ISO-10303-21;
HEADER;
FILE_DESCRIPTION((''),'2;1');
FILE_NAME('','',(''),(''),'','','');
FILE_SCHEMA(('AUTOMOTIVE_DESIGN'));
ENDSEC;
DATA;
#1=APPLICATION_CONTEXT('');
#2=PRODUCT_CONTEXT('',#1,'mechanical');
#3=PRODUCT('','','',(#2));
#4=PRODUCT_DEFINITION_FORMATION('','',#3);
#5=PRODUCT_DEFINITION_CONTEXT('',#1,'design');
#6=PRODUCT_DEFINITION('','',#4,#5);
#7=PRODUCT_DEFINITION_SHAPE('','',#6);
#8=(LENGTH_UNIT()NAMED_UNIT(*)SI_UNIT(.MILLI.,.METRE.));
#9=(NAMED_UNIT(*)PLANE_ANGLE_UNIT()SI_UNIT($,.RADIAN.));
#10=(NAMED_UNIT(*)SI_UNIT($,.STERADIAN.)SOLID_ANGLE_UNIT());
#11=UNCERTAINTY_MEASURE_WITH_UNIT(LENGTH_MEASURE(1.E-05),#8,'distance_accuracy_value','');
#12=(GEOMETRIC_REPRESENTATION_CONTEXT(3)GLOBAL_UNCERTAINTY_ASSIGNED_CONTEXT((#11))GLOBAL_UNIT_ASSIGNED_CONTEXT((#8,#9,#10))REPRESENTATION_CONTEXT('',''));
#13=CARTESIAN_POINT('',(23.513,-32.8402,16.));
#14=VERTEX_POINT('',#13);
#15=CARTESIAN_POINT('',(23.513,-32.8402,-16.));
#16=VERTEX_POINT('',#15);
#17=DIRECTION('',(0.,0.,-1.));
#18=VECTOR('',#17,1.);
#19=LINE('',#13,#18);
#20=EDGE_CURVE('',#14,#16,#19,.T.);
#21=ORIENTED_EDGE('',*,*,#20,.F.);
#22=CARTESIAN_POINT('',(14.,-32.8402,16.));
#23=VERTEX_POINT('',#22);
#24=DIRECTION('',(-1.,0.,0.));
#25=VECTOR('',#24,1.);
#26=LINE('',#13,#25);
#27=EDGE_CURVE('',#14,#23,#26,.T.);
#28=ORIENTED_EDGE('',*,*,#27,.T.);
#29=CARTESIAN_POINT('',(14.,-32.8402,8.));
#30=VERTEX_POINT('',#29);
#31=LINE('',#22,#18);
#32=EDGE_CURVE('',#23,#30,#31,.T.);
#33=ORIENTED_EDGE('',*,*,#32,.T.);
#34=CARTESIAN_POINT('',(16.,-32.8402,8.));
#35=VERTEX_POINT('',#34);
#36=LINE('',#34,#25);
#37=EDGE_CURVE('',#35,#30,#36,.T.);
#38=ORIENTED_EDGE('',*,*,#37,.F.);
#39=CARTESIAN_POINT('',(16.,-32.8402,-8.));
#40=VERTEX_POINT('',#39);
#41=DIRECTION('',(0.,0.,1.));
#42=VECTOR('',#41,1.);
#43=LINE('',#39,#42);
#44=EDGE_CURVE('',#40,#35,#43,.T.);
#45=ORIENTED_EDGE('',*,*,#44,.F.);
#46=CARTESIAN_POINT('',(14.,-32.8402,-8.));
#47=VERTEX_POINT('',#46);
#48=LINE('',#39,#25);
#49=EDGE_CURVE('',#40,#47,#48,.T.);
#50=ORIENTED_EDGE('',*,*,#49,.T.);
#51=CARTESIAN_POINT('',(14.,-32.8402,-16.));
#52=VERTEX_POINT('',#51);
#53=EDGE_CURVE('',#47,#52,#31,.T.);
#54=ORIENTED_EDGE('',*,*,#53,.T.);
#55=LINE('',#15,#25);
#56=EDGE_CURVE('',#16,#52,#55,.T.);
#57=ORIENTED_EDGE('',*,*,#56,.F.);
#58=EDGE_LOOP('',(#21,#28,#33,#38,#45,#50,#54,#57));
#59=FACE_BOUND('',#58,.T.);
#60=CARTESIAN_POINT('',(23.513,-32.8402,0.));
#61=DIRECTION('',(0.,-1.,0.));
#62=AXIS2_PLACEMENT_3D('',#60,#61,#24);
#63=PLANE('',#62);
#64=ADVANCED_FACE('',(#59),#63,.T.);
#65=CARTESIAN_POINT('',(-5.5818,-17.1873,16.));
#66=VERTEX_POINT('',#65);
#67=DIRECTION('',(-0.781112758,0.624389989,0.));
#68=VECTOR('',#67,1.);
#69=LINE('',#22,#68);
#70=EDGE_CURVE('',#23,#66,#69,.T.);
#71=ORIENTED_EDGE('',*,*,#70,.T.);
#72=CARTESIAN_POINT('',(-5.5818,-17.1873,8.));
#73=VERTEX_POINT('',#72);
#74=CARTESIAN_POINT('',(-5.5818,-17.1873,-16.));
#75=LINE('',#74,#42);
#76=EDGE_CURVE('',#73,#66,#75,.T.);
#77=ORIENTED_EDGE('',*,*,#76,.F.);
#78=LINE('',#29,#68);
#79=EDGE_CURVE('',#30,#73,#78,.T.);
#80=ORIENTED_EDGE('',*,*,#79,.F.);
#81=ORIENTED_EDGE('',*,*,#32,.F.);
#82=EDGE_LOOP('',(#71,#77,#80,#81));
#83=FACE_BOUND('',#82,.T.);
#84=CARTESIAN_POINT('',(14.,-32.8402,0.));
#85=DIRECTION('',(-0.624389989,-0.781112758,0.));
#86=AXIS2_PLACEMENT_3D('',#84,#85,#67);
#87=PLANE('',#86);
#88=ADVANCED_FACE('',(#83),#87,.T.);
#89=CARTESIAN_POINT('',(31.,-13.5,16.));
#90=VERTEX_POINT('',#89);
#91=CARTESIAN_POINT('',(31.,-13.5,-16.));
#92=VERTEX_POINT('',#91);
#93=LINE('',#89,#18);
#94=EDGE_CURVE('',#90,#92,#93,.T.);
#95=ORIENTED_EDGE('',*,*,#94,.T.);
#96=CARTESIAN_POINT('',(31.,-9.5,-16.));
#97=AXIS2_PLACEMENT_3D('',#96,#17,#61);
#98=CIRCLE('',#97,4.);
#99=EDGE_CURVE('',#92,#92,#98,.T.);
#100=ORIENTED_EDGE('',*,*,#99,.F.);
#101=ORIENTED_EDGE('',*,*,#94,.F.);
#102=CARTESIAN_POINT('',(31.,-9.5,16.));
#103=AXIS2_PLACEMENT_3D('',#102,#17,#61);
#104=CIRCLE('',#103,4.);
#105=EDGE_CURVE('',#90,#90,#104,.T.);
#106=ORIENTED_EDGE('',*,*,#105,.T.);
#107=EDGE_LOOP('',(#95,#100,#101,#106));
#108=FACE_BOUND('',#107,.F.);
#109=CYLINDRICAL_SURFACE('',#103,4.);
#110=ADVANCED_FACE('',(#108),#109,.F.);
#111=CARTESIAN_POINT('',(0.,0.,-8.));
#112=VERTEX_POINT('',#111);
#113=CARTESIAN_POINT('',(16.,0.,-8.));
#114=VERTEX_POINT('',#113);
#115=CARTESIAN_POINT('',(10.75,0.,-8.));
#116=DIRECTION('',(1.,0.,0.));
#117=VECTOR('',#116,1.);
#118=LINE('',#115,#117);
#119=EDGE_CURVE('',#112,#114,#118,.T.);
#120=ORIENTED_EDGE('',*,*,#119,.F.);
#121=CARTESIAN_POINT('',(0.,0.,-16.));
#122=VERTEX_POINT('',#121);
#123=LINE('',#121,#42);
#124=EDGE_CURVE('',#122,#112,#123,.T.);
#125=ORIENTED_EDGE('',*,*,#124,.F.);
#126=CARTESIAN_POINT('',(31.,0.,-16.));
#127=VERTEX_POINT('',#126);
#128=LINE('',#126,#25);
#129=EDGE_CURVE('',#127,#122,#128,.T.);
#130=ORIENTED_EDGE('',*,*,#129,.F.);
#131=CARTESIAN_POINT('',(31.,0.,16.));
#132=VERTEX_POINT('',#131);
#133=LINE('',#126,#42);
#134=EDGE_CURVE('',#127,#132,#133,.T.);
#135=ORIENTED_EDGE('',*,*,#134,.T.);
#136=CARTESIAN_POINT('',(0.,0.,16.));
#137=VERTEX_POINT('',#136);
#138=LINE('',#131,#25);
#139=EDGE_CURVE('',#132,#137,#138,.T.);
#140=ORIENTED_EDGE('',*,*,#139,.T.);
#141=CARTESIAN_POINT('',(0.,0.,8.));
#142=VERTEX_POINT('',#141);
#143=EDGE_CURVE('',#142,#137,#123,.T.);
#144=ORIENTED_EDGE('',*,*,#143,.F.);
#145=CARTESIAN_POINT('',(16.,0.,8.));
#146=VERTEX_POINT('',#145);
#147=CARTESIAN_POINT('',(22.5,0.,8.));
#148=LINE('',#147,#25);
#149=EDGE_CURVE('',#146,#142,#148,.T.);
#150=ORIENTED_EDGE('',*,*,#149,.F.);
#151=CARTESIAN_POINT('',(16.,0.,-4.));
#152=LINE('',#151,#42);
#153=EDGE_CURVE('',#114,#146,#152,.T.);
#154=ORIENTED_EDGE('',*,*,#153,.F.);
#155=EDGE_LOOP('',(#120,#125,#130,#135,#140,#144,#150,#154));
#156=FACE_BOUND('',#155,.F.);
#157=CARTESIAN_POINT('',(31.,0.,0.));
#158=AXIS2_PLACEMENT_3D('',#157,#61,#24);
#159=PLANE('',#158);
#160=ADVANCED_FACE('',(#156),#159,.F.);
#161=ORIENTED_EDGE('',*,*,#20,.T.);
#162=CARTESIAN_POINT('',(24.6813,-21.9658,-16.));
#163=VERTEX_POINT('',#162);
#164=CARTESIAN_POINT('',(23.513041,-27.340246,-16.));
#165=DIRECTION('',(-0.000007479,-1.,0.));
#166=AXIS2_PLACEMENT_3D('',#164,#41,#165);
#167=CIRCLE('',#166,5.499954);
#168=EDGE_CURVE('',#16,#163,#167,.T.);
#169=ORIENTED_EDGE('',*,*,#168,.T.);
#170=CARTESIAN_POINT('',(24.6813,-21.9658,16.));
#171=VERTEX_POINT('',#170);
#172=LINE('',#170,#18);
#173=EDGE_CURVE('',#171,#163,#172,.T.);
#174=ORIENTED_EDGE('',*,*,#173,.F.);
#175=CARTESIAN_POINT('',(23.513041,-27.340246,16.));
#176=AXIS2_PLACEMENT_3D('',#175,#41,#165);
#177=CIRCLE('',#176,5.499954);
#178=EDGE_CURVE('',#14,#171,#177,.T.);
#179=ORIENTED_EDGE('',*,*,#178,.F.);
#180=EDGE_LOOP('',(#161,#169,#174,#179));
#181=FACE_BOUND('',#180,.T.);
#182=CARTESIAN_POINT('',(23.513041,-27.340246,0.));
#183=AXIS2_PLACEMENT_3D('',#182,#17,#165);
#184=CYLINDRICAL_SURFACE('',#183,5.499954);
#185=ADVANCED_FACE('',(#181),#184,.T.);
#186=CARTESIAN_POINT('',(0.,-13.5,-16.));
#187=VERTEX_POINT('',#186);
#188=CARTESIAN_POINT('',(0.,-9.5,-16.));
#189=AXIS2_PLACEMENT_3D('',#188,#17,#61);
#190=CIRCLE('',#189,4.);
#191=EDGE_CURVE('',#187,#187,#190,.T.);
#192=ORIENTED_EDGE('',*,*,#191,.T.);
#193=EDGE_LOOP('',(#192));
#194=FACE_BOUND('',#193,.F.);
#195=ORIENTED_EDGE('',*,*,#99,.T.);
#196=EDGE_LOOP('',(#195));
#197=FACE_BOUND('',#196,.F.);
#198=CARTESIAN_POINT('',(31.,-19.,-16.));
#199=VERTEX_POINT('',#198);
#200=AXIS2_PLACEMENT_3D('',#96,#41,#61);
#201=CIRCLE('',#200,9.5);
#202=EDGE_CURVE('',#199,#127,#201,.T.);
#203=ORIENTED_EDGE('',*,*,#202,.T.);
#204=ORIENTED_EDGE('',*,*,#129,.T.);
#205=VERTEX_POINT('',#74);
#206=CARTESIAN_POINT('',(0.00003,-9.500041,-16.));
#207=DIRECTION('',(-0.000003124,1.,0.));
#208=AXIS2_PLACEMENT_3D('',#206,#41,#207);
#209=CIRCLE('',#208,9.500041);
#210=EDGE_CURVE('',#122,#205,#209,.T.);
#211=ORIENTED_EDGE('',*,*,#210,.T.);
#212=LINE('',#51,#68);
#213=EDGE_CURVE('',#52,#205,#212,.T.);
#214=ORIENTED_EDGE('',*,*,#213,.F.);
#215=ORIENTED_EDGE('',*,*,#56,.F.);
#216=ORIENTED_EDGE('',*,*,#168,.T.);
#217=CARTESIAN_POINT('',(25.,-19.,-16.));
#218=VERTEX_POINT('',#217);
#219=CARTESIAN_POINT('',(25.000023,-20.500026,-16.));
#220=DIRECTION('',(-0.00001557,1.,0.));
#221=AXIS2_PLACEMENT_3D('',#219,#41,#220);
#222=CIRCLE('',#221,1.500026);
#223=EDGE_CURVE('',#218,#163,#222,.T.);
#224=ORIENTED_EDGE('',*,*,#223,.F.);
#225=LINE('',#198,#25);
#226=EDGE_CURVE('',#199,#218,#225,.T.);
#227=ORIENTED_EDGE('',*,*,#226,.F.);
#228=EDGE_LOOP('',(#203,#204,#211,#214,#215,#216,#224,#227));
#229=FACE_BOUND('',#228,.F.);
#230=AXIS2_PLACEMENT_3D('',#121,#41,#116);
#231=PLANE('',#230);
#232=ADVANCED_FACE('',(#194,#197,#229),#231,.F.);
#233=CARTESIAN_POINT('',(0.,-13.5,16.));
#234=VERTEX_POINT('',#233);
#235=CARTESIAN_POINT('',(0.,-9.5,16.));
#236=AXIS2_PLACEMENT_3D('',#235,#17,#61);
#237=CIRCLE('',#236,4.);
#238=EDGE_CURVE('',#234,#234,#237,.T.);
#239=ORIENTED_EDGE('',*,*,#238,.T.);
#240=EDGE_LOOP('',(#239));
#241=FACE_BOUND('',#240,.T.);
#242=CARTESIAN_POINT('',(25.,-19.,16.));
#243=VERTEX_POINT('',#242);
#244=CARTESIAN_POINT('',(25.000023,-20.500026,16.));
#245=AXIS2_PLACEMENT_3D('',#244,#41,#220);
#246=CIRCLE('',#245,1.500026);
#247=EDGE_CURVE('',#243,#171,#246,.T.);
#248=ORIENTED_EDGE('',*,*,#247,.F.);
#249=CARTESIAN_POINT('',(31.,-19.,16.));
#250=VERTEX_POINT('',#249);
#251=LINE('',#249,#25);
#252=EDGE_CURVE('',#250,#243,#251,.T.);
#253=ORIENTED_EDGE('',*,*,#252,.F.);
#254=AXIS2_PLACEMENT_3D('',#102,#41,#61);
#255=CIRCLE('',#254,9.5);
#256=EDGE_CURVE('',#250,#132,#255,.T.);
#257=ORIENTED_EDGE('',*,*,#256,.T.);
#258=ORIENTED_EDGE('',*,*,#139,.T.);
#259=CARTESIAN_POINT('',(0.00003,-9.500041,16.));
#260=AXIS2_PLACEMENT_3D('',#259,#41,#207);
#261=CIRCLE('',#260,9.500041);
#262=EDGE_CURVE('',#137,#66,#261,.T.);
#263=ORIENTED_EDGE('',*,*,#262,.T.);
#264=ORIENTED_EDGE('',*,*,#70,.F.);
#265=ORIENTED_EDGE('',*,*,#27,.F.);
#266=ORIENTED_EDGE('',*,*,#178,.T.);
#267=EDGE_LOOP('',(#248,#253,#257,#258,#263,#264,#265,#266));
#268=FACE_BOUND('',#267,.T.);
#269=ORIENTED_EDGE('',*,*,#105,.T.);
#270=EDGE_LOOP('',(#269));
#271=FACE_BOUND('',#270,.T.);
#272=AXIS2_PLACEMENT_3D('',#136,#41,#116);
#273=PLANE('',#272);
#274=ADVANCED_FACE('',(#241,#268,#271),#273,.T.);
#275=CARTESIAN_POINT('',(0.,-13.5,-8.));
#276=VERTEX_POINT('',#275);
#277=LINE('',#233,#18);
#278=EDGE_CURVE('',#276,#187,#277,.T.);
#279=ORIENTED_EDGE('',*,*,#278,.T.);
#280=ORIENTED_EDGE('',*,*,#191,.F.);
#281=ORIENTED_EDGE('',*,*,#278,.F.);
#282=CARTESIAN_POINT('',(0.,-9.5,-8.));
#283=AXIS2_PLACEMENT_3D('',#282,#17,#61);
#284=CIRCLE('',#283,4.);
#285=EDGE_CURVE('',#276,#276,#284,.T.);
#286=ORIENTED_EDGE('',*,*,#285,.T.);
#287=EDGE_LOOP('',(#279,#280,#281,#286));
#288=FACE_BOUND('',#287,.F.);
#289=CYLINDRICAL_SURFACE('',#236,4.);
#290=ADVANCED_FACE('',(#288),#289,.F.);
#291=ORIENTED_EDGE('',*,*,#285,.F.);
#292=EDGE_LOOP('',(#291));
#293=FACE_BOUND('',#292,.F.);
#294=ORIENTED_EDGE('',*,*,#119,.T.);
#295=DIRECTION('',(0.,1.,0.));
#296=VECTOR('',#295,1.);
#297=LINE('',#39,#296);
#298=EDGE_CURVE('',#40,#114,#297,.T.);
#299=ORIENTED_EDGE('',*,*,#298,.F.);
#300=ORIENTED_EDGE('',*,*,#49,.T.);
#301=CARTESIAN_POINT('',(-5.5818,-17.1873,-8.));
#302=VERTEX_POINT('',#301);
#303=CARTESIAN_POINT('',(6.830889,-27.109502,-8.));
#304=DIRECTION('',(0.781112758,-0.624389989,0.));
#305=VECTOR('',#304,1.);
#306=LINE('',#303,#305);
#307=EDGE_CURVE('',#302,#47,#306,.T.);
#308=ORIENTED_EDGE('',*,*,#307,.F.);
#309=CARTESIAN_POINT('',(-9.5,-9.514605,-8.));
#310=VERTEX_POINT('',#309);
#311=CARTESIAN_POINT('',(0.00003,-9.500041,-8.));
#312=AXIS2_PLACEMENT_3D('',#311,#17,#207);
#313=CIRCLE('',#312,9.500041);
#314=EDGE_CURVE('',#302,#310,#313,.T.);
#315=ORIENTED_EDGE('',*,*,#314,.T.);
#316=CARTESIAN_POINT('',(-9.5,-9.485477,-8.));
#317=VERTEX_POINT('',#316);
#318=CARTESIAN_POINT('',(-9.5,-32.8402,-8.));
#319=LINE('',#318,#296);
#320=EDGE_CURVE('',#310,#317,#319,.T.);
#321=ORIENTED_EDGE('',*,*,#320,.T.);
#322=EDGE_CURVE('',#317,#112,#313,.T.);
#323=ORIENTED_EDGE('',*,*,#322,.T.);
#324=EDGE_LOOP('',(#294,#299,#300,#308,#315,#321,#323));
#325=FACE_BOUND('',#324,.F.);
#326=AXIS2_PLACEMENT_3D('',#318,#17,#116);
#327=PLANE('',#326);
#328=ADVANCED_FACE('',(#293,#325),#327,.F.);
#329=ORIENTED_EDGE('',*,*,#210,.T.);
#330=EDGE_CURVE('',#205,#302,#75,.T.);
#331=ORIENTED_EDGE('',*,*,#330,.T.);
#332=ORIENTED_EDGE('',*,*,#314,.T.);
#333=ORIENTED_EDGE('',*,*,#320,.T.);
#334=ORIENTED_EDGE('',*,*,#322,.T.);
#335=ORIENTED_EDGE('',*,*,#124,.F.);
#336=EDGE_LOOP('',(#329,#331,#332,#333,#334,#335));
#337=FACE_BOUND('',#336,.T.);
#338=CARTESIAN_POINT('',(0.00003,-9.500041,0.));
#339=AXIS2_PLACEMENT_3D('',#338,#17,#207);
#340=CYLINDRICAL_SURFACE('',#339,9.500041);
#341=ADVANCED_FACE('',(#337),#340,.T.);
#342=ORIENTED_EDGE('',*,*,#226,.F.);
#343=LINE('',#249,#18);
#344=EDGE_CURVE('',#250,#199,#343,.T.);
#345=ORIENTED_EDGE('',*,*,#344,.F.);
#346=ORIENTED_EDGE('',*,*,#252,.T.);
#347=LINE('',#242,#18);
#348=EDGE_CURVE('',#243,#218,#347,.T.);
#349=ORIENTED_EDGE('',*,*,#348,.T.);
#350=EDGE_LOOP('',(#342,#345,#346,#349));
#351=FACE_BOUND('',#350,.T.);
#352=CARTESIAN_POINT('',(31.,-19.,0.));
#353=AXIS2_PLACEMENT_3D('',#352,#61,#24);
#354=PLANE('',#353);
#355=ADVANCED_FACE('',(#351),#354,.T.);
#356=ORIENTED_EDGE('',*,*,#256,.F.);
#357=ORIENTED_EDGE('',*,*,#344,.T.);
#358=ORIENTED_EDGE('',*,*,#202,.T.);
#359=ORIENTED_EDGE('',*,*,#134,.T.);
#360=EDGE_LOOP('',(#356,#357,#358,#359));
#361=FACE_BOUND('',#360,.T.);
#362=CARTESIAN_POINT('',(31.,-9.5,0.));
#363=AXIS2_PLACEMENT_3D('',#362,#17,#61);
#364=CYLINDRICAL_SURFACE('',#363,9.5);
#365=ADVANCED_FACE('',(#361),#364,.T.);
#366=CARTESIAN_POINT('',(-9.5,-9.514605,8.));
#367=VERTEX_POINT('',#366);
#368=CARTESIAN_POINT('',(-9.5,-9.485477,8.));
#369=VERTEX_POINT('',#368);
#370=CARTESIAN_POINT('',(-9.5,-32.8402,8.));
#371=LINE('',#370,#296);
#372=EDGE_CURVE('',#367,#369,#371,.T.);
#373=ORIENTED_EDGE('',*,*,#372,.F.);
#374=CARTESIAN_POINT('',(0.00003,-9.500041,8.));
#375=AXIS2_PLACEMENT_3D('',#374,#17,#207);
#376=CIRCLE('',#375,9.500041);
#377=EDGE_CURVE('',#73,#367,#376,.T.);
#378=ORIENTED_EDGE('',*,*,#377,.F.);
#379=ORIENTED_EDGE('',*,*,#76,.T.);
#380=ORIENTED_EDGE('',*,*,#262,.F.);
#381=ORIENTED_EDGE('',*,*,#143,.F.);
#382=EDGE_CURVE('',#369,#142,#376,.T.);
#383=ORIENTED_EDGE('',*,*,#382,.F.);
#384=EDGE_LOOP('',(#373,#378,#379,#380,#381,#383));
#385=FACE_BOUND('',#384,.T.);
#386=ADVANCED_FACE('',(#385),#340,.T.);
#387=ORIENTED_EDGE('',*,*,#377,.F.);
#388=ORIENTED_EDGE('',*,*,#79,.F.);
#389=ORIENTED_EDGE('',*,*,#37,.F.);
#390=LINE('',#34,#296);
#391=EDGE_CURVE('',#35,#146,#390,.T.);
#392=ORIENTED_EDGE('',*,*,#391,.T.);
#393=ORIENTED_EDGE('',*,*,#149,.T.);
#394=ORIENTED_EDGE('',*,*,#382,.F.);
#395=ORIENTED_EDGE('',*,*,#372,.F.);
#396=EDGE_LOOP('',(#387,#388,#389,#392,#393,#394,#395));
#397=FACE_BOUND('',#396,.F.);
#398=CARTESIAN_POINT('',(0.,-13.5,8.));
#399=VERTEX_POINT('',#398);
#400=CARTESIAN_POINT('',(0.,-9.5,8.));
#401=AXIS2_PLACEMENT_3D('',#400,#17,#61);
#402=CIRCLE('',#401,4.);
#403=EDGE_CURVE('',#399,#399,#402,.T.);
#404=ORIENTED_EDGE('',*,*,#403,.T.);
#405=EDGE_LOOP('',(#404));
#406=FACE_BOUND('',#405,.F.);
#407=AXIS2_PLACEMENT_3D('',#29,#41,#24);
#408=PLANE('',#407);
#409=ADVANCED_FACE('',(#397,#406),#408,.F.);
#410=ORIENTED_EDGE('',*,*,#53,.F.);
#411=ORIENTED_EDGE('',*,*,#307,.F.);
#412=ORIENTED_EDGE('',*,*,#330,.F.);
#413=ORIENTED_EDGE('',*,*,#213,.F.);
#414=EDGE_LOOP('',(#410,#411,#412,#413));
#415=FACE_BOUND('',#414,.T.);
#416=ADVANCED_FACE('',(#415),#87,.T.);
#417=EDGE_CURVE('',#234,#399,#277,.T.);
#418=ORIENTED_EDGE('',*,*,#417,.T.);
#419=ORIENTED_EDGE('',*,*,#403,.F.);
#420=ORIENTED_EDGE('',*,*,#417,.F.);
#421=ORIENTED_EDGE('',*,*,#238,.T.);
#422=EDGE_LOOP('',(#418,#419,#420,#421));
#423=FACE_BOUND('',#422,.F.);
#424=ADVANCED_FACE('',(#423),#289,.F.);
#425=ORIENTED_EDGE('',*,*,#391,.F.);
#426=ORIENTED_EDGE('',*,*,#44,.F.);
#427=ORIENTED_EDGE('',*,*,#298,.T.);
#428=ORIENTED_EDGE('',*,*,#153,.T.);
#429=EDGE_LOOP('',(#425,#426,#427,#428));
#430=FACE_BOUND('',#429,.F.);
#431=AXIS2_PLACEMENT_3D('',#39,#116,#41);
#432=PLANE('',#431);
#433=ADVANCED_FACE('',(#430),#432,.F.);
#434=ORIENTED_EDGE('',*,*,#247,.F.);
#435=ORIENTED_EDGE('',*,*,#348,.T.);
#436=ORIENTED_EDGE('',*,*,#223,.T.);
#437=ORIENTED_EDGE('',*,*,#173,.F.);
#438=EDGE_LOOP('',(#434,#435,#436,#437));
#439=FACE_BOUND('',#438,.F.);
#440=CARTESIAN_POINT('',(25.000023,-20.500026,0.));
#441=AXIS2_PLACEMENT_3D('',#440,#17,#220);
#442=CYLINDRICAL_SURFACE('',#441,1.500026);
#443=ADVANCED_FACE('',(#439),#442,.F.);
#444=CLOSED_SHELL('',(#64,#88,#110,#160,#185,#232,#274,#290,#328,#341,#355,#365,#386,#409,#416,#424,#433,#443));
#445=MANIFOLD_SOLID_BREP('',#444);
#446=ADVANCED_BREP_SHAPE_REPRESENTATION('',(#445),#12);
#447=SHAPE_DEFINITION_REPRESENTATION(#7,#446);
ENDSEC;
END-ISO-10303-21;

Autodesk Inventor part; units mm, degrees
ref_plane "YZ Plane" through (0, 0, 0) normal (1, 0, 0) x (0, 1, 0)
ref_plane "XZ Plane" through (0, 0, 0) normal (0, 1, 0) x (-1, 0, 0)
sketch "Sketch1" plane through (0, 0, 0) normal (0, 0, 1) x (1, 0, 0)
  circle A0 centre (31, -9.5) radius 4 construction
  circle A1 centre (0, -9.5) radius 4 construction
  line L0 (31, 0) -> (0, 0)
  arc A2 (0, 0) -> (-5.5818, -17.1873) centre (0, -9.5) ccw
  line L1 (14, -32.8402) -> (-5.5818, -17.1873)
  line L2 (23.513, -32.8402) -> (14, -32.8402)
  arc A3 (23.513, -32.8402) -> (24.6813, -21.9658) centre (23.513, -27.3402) ccw
  arc A4 (25, -19) -> (24.6813, -21.9658) centre (25, -20.5) ccw
  line L3 (31, -19) -> (25, -19)
  arc A5 (31, -19) -> (31, 0) centre (31, -9.5) ccw
  point P0 (0, 0)
  dimension "d0" = 9.5
  dimension "d1" = 8
  dimension "d2" = 31
  dimension "d3" = 1.5
  dimension "d4" = 5.5
  dimension "d6" = 9.513
  dimension "d7" = 38.638
  dimension "d9" = 32.8402
  dimension "d10" = 16.9104
extrude "Extrusion1" add sketch "Sketch1" along normal mid plane 32
sketch "Sketch2" plane through (14, -32.8402, 16) normal (0, -1, 0) x (1, 0, 0)
  line L0 (0, -32) -> (0, 0) projected
  line L1 (-23.5, -32) -> (-23.5, 0) projected
  line L2 (-23.5, -24) -> (2, -24)
  line L3 (2, -24) -> (2, -8)
  line L4 (2, -8) -> (-23.5, -8)
  line L5 (-23.5, -8) -> (-23.5, -24)
  point P0 (-23.5, -16)
  dimension "d13" = 2
  dimension "d14" = 16
extrude "Extrusion2" cut sketch "Sketch2" against normal through all
hole "Hole1" at (31, -9.5, 16) direction (0, 0, -1) diameter 8 end through all
hole "Hole2" at (0, -9.5, 16) direction (0, 0, -1) diameter 8 end through all
equation "\"LENGTH\" = 25.4"
properties part number "TU-008"
